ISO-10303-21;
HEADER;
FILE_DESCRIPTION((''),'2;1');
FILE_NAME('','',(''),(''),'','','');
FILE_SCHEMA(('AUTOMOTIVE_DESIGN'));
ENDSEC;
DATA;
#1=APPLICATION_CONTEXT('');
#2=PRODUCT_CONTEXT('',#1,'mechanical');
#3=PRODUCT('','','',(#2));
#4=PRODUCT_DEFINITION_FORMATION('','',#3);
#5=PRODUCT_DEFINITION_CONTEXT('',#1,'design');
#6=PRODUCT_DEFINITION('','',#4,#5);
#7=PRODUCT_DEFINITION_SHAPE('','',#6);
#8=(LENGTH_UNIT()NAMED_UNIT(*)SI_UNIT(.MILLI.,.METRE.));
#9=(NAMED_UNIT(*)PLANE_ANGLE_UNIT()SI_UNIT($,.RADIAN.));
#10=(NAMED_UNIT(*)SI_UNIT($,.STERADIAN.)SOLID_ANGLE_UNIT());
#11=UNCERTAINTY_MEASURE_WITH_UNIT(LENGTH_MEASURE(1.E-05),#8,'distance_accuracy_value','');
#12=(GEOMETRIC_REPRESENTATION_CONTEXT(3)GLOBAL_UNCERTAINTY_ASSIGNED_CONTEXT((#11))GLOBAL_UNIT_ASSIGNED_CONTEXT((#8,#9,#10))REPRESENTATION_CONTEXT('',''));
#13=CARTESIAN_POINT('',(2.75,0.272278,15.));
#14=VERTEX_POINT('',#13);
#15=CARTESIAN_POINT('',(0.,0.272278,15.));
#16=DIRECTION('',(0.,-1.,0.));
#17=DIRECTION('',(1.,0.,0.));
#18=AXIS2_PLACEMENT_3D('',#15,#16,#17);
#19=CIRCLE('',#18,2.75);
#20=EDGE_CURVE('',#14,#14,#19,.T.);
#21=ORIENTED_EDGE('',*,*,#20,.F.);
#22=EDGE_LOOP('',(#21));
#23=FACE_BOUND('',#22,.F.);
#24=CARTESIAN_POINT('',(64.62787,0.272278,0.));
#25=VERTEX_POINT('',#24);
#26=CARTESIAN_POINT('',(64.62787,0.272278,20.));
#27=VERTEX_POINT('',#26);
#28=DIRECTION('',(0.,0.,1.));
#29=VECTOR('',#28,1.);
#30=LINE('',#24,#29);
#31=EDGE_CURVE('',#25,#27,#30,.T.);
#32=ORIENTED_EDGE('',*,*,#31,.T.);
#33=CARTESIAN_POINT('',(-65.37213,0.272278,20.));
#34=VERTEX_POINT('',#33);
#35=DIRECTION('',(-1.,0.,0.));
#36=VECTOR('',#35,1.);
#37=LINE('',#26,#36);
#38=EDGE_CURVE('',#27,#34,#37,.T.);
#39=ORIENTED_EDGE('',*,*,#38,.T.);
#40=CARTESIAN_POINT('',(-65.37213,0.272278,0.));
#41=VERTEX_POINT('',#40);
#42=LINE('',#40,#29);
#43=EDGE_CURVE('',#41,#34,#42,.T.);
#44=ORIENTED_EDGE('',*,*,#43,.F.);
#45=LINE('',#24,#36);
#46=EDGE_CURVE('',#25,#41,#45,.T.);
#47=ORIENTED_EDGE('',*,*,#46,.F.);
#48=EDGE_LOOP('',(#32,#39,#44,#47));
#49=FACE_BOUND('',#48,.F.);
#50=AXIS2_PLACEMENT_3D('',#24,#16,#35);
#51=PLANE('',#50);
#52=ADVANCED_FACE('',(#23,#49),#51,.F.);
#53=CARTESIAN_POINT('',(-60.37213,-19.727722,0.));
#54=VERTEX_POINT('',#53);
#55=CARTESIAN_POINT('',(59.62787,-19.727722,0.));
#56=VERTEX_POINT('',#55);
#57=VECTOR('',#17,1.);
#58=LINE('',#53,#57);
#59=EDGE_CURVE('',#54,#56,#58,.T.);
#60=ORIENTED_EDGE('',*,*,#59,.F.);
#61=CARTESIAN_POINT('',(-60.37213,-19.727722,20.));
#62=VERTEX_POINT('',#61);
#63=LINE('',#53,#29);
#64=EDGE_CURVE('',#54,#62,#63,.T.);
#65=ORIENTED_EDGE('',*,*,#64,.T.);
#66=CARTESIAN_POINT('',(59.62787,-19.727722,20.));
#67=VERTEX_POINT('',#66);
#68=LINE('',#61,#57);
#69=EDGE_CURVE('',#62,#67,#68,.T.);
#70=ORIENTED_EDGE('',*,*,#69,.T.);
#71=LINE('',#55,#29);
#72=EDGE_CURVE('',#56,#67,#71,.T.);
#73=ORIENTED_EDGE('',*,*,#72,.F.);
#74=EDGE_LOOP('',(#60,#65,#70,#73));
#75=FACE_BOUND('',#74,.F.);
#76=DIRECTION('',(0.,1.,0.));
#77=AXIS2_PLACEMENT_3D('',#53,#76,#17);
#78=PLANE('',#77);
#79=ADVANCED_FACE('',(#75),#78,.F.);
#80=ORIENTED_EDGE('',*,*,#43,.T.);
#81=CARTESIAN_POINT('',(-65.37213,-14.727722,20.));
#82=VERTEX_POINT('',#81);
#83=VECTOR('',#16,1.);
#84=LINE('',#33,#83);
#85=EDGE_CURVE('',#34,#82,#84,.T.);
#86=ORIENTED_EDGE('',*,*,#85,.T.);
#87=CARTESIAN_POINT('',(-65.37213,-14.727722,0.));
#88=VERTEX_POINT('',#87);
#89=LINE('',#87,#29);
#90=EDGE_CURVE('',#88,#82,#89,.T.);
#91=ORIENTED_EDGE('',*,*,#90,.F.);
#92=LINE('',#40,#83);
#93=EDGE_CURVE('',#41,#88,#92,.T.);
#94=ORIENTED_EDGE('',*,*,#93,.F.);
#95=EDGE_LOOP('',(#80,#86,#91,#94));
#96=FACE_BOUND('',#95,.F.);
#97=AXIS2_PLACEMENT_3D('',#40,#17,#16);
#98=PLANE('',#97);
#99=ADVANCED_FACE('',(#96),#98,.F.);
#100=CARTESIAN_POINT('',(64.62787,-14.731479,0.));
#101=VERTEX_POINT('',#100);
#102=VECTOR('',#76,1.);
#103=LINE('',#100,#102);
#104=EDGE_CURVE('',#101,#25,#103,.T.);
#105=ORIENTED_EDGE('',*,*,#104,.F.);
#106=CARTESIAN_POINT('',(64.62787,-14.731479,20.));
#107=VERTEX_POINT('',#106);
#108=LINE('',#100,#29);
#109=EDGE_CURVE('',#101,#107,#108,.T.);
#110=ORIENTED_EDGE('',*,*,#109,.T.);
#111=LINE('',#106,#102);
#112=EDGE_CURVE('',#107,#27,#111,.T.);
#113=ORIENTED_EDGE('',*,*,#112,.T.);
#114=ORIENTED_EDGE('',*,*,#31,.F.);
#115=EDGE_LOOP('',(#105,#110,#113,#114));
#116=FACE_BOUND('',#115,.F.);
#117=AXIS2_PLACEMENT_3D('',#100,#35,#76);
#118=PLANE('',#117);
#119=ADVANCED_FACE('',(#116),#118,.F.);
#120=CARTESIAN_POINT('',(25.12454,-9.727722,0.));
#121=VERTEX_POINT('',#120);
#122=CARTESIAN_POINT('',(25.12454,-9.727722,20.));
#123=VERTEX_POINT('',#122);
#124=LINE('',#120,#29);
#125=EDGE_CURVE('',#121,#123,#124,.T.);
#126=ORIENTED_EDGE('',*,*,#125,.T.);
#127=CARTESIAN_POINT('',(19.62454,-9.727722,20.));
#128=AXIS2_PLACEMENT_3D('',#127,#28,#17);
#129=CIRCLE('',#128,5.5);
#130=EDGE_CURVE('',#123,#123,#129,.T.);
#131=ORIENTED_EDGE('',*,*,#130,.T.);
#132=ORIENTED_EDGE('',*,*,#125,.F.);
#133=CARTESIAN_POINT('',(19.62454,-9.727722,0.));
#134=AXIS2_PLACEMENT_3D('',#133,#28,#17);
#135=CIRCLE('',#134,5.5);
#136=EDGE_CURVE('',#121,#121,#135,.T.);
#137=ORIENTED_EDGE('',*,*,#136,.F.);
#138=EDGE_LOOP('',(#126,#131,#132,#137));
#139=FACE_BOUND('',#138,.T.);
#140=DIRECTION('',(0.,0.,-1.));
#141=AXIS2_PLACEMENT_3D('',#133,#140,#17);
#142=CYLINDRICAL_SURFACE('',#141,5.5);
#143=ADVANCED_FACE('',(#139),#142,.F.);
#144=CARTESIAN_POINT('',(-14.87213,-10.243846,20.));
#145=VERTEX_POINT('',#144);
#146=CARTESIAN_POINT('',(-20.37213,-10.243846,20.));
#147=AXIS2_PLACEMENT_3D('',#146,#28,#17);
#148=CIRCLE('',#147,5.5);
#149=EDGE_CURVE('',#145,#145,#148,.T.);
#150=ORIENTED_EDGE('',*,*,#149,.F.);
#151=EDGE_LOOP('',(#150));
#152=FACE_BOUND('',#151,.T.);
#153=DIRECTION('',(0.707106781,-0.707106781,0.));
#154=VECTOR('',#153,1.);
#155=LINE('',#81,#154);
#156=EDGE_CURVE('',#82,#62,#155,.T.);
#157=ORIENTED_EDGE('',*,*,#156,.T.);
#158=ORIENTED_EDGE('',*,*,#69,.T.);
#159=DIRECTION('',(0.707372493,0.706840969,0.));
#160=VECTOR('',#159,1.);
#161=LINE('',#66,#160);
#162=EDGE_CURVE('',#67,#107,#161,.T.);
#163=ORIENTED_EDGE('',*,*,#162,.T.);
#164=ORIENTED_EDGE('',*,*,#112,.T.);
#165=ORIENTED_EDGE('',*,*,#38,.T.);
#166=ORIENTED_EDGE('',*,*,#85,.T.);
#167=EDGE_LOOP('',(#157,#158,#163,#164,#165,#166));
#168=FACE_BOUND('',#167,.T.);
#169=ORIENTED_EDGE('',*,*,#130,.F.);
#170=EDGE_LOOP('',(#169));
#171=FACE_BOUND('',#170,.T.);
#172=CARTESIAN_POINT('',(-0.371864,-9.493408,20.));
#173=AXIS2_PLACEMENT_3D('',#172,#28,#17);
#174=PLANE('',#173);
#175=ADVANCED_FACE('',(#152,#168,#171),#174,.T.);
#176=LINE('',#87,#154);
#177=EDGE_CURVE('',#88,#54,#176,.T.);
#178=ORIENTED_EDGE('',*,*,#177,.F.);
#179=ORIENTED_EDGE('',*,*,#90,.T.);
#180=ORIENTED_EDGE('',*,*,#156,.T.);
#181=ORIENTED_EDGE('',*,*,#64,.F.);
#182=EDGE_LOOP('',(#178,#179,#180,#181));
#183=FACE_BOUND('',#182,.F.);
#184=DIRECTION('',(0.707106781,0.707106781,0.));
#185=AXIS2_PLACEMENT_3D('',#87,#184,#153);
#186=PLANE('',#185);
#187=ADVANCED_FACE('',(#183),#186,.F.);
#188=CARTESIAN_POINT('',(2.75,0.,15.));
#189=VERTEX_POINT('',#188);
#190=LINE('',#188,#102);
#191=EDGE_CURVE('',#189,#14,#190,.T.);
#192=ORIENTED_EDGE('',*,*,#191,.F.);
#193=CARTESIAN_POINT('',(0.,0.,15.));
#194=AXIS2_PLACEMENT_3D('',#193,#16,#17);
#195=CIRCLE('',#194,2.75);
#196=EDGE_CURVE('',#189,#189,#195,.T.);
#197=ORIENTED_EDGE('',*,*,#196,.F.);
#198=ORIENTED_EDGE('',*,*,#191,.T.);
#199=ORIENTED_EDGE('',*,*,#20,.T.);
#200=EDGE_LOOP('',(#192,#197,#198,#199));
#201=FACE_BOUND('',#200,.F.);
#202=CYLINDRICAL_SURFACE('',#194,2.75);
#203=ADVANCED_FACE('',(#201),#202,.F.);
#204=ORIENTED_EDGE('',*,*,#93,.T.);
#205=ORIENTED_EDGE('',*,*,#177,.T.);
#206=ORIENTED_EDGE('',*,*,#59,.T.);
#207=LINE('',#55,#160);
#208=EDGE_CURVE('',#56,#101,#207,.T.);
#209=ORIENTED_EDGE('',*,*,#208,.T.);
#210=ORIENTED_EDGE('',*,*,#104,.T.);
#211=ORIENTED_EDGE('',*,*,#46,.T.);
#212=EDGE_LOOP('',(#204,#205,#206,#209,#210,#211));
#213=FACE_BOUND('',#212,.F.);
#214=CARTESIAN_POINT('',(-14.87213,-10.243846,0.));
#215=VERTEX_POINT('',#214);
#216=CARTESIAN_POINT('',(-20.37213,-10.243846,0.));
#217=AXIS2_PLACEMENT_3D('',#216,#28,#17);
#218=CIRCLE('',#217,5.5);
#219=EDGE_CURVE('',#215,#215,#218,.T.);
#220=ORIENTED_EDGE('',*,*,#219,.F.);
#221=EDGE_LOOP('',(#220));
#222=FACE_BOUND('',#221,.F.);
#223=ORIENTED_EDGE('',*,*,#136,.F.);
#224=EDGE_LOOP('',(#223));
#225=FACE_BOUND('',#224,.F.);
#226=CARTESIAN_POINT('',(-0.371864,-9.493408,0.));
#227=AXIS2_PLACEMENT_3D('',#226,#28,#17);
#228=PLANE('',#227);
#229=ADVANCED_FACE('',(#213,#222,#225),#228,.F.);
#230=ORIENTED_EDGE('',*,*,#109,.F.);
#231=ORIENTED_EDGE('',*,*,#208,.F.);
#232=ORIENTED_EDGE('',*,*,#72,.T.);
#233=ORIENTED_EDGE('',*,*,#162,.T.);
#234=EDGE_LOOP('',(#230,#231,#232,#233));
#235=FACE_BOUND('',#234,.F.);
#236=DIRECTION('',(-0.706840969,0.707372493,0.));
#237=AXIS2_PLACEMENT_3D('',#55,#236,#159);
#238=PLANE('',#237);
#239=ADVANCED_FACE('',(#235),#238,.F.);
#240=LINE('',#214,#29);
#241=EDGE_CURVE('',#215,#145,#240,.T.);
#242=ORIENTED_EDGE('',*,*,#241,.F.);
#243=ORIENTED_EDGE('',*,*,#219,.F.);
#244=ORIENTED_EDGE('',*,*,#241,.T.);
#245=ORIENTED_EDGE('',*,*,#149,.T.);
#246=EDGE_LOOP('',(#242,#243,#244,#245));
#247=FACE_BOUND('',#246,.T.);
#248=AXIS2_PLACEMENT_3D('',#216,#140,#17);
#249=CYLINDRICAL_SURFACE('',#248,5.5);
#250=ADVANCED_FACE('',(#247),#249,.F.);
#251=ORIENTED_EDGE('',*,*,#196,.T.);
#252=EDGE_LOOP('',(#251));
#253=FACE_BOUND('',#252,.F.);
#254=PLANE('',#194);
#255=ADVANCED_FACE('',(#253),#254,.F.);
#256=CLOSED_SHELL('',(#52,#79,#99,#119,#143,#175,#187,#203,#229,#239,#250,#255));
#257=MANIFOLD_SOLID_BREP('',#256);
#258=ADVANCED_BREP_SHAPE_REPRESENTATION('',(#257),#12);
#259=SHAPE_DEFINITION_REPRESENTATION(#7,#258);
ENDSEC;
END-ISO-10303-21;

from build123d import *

# Parameters (mm, degrees)
F0_R     = 5.5
F2_DEPTH = 20
F4_D     = 5.5
F4_DEPTH = 12
F4_TIP   = 1.6523667023


# Not quite as in the source:
# - the program builds the solid bodies; features that only make, move or delete a surface that nothing else refers to are left out


with BuildPart() as f2:
    # F0 (on Top) → F2 (new body)
    with BuildSketch(Plane.XY):
        Polygon((64.6278701635, 0.2722779787), (-65.3721298365, 0.2722779787), (-65.3721298365, -14.7277220213), (-60.3721298365, -19.7277220213), (59.6278701635, -19.7277220213), (64.6278701635, -14.7314790532), align=None)
        with Locations((-20.3721298365, -10.2438455071)):
            Circle(F0_R, mode=Mode.SUBTRACT)
        with Locations((19.6245402317, -9.7277220213)):
            Circle(F0_R, mode=Mode.SUBTRACT)
    extrude(amount=F2_DEPTH)

    # F4 (one way)
    with BuildSketch(Plane.XZ):
        with Locations((0, 15)):
            Circle(F4_D / 2)
    extrude(amount=-F4_DEPTH, mode=Mode.SUBTRACT)
    with Locations(Plane.XZ):
        with Locations((0, 15)):
            with Locations((0, 0, -(F4_DEPTH + F4_TIP / 2))):  # 118° drill point
                Cone(0, F4_D / 2, F4_TIP, mode=Mode.SUBTRACT)


solid = f2.part
